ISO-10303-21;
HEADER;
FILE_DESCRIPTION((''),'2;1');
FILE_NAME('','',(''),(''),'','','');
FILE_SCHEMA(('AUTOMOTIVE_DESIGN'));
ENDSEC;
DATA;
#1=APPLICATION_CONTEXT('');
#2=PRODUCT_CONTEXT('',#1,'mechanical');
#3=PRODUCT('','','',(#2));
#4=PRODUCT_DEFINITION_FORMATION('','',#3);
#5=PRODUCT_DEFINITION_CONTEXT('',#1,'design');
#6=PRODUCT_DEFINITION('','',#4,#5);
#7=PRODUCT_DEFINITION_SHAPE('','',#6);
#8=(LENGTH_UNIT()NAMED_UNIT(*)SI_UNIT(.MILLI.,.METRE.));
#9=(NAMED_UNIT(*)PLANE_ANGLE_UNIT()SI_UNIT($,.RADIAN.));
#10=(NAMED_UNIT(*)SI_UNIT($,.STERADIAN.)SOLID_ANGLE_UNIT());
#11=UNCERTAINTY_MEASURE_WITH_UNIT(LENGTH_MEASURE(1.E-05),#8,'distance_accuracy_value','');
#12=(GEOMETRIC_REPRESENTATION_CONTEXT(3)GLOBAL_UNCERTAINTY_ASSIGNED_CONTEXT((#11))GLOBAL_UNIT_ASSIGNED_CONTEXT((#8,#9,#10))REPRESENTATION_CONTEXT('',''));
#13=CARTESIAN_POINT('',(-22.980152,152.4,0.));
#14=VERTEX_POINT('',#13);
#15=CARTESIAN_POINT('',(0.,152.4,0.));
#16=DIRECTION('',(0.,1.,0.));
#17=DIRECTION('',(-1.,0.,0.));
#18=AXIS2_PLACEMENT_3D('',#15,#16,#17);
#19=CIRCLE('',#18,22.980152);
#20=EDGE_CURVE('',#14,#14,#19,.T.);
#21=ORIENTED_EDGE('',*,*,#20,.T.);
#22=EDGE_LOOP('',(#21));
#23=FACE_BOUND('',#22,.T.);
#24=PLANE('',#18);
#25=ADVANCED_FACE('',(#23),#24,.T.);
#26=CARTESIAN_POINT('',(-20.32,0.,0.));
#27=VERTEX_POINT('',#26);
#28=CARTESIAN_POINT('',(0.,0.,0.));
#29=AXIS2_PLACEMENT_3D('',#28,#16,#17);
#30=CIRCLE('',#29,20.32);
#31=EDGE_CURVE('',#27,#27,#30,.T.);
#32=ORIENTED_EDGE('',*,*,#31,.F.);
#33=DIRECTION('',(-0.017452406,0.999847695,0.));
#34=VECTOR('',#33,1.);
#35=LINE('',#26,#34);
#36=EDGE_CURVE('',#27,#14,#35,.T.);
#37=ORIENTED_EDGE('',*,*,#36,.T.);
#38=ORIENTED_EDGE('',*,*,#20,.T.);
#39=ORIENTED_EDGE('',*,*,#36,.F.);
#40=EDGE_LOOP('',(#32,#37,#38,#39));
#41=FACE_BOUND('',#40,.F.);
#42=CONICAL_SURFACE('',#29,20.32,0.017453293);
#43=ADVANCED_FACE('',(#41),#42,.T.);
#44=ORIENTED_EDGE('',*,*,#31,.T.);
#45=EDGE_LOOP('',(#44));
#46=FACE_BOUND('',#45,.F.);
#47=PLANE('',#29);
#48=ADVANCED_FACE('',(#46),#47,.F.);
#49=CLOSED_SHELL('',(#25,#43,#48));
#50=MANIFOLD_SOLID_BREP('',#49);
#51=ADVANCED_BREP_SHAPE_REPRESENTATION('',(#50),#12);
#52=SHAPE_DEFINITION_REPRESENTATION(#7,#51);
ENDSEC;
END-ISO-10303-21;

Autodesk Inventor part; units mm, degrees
ref_plane "YZ Plane" through (0, 0, 0) normal (1, 0, 0) x (0, 1, 0)
ref_plane "XZ Plane" through (0, 0, 0) normal (0, 1, 0) x (-1, 0, 0)
ref_plane "XY Plane" through (0, 0, 0) normal (0, 0, 1) x (1, 0, 0)
sketch "Sketch1" plane through (0, 0, 0) normal (0, 1, 0) x (-1, 0, 0)
  circle A0 centre (0, 0) radius 20.32
  dimension "d0" = 40.64
extrude "Extrusion1" add sketch "Sketch1" along normal blind 152.4
draft "FaceDraft1" angle -1 pull direction (0, 1, 0) faces at (-20.2541, 101.6, -1.6351) fixed edges at (20.32, 0, 0)
properties part number "Piston Head Stock Cast Image"
